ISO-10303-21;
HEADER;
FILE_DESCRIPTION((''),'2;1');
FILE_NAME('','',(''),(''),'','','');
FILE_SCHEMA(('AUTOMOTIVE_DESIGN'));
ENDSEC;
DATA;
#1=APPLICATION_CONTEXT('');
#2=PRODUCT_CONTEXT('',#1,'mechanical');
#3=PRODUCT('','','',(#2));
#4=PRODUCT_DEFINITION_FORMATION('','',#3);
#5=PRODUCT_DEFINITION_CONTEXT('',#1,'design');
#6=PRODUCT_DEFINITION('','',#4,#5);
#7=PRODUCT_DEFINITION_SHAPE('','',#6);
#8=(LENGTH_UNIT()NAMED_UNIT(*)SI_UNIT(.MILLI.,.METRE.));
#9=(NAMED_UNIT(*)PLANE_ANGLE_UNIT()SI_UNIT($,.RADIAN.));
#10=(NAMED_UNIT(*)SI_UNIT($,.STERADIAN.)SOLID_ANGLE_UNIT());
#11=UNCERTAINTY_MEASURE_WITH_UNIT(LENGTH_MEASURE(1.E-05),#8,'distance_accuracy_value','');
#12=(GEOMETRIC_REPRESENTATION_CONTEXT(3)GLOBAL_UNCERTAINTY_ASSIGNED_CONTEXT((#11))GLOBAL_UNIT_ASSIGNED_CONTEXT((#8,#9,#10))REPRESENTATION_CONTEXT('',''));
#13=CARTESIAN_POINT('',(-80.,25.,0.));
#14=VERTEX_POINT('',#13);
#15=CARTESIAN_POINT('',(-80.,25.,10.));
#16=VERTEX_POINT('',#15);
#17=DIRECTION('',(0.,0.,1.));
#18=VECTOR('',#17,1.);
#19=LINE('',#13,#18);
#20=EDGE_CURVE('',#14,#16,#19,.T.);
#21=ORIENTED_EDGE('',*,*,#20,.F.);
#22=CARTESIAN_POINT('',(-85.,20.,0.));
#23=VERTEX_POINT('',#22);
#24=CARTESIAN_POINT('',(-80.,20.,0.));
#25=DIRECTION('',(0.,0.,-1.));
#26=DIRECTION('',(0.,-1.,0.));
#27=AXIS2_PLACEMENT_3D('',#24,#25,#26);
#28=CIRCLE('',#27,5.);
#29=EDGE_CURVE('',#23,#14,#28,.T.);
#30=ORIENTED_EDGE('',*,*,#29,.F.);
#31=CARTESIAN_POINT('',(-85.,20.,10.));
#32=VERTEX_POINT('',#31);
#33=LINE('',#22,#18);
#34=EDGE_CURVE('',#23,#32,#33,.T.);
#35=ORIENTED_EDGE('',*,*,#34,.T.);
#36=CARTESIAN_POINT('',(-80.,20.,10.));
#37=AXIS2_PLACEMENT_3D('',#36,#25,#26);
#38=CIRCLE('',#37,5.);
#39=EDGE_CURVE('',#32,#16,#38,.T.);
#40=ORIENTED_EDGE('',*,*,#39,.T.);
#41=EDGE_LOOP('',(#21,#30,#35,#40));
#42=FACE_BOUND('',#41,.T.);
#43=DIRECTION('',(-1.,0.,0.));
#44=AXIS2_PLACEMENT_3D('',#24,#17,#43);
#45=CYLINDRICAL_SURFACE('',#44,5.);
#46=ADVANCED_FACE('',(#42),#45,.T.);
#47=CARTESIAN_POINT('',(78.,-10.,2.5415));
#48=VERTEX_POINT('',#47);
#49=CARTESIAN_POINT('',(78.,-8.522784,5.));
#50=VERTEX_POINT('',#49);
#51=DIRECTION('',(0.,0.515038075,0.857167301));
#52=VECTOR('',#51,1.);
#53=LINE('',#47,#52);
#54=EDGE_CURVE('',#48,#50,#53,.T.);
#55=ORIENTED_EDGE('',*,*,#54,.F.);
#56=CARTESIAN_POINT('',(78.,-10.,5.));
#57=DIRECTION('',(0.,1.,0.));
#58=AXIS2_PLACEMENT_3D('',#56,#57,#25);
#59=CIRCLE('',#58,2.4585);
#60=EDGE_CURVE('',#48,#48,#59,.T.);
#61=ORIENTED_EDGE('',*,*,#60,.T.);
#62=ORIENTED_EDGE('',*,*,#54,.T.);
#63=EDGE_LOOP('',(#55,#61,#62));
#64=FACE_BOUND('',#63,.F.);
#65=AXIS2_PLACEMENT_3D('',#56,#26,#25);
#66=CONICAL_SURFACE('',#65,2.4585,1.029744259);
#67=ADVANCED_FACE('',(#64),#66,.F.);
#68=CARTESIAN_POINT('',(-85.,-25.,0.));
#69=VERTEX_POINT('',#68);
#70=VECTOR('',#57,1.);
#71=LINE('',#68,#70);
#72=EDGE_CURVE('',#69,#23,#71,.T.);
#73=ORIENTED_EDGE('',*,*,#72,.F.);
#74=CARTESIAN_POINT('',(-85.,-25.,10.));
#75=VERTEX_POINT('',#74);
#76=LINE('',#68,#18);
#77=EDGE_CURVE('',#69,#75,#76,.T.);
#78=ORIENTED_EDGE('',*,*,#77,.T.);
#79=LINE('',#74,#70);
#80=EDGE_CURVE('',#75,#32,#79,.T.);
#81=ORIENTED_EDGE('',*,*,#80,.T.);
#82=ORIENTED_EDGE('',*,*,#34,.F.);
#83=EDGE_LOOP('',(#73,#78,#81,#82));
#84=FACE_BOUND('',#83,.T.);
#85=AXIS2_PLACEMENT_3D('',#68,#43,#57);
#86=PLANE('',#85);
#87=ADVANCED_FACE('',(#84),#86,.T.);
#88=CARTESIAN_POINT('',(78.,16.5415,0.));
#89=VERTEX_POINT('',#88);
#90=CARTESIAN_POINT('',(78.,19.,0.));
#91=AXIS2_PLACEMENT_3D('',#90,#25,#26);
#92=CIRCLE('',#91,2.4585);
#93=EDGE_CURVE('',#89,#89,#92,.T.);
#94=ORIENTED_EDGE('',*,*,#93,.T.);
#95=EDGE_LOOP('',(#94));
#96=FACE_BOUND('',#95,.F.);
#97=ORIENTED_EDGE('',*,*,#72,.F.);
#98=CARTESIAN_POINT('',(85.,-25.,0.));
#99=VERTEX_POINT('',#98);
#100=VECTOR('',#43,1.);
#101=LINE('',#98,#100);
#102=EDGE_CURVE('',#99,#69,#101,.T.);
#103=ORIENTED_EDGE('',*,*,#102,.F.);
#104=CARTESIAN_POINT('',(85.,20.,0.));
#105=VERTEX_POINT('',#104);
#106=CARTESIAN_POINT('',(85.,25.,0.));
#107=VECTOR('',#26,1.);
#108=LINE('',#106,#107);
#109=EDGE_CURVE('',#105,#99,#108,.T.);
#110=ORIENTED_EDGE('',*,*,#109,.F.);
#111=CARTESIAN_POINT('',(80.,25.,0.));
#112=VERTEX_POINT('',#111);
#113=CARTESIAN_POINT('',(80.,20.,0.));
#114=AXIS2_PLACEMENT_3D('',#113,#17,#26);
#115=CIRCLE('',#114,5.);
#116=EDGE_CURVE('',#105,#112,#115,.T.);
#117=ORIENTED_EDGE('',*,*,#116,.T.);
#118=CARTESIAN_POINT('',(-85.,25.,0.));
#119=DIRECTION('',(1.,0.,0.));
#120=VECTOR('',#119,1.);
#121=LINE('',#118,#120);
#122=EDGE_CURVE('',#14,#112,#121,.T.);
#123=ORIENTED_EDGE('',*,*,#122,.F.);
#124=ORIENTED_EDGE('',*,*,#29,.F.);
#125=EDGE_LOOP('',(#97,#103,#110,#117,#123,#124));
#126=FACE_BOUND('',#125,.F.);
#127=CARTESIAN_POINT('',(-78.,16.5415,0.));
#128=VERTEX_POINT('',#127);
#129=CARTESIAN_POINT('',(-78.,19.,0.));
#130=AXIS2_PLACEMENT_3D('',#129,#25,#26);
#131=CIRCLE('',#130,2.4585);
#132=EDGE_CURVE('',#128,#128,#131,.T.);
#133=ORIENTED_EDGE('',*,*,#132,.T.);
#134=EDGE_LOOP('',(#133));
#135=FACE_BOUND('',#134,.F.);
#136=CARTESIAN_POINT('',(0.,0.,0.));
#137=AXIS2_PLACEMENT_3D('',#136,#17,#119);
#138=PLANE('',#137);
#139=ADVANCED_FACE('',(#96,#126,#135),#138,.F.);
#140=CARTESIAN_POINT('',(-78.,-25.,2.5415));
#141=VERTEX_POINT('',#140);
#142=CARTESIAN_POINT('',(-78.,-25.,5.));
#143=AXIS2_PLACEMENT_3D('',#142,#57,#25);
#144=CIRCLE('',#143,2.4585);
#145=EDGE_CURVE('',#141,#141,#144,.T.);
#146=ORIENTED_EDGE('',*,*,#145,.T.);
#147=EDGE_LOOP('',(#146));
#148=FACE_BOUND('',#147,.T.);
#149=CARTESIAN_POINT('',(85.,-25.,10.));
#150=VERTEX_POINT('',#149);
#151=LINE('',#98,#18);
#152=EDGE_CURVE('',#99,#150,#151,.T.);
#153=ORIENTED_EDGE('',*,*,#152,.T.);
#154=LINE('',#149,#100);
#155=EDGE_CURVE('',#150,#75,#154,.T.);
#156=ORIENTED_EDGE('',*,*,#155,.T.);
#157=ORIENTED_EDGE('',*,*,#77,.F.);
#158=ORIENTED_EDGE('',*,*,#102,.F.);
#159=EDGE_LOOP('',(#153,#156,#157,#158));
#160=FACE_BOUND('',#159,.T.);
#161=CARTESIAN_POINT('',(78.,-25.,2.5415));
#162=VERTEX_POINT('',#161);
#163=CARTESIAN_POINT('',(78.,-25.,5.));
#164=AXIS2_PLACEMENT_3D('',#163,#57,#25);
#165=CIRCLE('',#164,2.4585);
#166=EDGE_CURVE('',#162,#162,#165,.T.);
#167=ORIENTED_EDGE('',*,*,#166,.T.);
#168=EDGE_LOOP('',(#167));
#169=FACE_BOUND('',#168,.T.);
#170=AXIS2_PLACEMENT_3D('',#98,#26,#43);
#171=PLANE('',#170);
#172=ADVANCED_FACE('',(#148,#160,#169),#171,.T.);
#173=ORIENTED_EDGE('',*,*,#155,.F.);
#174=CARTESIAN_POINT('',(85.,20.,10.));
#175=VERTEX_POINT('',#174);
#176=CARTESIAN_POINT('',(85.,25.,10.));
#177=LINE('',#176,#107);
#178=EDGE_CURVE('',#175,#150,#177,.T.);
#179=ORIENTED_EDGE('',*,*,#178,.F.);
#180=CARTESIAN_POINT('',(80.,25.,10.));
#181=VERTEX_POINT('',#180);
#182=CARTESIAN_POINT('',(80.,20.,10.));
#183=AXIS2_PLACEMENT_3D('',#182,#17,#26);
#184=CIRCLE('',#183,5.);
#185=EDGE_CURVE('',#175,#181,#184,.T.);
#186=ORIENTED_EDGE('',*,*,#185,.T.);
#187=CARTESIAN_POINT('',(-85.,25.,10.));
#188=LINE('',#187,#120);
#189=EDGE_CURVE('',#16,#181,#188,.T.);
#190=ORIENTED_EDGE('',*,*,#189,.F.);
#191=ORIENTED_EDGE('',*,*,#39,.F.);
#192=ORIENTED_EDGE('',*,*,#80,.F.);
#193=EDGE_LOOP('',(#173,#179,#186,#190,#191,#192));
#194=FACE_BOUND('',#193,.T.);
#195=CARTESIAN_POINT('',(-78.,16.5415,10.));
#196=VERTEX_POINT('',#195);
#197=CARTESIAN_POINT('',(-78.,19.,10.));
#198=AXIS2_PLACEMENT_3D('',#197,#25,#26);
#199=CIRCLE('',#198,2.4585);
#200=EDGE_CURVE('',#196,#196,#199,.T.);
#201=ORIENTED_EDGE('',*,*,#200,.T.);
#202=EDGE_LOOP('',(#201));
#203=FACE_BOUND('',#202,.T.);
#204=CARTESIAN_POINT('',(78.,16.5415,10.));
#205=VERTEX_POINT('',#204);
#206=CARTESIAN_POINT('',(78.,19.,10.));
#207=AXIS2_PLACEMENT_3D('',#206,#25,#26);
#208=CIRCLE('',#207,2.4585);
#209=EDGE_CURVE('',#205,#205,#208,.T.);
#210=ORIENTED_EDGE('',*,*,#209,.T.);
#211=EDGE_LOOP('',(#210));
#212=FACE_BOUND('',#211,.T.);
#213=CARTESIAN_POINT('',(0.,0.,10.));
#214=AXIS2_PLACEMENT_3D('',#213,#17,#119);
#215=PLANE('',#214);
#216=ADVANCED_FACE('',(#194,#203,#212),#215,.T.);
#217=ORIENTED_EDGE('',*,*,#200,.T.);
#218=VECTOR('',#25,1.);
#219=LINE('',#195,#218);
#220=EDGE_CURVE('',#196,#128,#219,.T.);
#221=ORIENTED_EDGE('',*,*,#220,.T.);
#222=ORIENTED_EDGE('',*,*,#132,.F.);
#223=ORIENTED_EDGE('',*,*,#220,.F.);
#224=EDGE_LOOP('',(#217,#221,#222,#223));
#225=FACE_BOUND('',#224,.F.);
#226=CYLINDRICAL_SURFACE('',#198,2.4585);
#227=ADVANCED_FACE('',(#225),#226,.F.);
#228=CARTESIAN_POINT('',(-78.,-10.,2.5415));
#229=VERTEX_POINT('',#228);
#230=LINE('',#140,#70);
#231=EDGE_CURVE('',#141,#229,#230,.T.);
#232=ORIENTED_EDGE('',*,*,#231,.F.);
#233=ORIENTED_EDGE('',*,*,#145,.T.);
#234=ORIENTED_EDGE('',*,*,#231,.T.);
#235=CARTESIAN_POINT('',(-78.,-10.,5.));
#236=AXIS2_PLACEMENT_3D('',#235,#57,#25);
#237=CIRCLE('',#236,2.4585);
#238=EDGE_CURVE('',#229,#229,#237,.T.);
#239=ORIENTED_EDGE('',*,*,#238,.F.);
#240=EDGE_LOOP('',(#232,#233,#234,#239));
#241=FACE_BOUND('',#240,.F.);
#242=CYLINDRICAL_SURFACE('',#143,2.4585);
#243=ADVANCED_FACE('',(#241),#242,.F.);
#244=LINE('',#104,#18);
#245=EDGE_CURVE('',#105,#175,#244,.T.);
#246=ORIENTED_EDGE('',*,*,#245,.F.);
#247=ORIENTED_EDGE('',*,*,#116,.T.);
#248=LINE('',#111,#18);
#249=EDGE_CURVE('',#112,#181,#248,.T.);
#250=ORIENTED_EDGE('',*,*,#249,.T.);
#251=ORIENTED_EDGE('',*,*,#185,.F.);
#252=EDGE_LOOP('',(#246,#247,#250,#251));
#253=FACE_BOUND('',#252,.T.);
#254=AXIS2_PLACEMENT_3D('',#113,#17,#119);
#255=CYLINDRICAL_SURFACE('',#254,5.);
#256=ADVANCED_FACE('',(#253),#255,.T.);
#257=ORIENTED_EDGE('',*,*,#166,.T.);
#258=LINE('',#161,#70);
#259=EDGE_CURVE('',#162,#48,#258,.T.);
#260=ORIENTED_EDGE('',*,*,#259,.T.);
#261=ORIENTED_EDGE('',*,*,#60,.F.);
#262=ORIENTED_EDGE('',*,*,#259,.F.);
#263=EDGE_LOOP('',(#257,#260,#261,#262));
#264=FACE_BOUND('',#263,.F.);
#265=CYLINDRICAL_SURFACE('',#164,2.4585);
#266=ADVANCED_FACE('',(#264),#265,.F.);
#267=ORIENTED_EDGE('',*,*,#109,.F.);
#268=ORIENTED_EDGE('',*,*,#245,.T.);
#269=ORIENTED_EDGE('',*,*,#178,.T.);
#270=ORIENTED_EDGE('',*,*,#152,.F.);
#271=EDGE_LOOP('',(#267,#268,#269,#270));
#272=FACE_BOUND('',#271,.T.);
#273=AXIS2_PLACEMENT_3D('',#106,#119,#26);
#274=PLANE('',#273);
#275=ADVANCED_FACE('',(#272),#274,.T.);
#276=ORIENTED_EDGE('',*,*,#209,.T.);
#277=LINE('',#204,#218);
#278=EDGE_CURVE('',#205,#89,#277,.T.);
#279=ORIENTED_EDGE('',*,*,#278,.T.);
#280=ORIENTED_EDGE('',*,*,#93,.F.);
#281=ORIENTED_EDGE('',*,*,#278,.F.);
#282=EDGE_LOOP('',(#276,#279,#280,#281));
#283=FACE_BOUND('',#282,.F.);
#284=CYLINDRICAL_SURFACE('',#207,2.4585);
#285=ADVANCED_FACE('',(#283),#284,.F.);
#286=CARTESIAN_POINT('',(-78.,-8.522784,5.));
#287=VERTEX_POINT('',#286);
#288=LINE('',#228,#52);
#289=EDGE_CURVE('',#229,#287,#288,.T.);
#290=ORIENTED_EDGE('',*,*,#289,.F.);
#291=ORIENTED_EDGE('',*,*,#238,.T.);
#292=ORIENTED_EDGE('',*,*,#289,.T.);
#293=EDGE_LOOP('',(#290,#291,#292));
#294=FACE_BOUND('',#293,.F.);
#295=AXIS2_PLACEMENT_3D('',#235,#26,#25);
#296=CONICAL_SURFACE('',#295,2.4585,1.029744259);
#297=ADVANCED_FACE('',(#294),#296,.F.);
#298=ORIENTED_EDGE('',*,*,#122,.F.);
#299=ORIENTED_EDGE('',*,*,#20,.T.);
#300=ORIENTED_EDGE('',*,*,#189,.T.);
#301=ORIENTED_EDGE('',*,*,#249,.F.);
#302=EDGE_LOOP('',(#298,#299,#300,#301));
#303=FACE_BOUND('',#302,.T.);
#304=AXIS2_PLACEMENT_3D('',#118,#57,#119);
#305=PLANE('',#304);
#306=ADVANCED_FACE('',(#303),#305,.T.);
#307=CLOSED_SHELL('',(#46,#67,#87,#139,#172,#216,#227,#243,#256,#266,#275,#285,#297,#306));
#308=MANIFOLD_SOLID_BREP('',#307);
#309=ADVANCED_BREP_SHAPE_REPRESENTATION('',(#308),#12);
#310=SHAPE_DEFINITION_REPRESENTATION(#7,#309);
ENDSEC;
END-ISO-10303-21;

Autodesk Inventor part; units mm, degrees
ref_plane "YZ Plane" through (0, 0, 0) normal (1, 0, 0) x (0, 1, 0)
ref_plane "XZ Plane" through (0, 0, 0) normal (0, 1, 0) x (-1, 0, 0)
ref_plane "XY Plane" through (0, 0, 0) normal (0, 0, 1) x (1, 0, 0)
sketch "Sketch1" plane through (0, 0, 0) normal (0, 0, 1) x (1, 0, 0)
  line L0 (85, -25) -> (-85, -25)
  line L1 (-85, -25) -> (-85, 25)
  line L2 (-85, 25) -> (85, 25)
  line L3 (85, 25) -> (85, -25)
  line L4 (85, -25) -> (-85, 25) construction
  line L5 (-85, -25) -> (85, 25) construction
  point P0 (0, 0)
  dimension "d0" = 170
  dimension "d1" = 50
extrude "Extrusion1" add sketch "Sketch1" along normal blind 10
sketch "Sketch2" plane through (0, 0, 10) normal (0, 0, 1) x (1, 0, 0)
  line L0 (85, 25) -> (-85, 25) construction
  line L1 (0, 25) -> (0, -25) construction
  line L2 (-85, -25) -> (85, -25) construction
  line L3 (-85, 25) -> (-85, -25) projected
  line L4 (85, -25) -> (85, 25) projected
  point P0 (0, 0)
  point P1 (-78, 19)
  point P2 (78, 19)
  dimension "d4" = 7
  dimension "d5" = 6
hole "Hole1" at (-78, 19, 10) at (78, 19, 10) direction (0, 0, -1) diameter 4.917 end through all thread size "M6x1" class "6H" standard "ISO Metric profile"
sketch "Sketch3" plane through (-85, -25, 0) normal (0, -1, 0) x (1, 0, 0)
  line L0 (0, 0) -> (0, 10) projected
  line L1 (0, 10) -> (170, 10) projected
  line L2 (85, 0) -> (85, 10) construction
  point P0 (7, 5)
  point P1 (0, 5)
  point P2 (163, 5)
  dimension "d24" = 5
  dimension "d25" = 7
hole "Hole2" at (-78, -25, 5) at (78, -25, 5) direction (0, 1, 0) diameter 4.917 depth 15 tip angle 118 thread size "M6x1" class "6H" standard "ISO Metric profile"
fillet "Fillet1" radius 5 2 edges at (-85, 25, 5) (85, 25, 5)
properties part number "Support_driver" material "Stainless Steel"
